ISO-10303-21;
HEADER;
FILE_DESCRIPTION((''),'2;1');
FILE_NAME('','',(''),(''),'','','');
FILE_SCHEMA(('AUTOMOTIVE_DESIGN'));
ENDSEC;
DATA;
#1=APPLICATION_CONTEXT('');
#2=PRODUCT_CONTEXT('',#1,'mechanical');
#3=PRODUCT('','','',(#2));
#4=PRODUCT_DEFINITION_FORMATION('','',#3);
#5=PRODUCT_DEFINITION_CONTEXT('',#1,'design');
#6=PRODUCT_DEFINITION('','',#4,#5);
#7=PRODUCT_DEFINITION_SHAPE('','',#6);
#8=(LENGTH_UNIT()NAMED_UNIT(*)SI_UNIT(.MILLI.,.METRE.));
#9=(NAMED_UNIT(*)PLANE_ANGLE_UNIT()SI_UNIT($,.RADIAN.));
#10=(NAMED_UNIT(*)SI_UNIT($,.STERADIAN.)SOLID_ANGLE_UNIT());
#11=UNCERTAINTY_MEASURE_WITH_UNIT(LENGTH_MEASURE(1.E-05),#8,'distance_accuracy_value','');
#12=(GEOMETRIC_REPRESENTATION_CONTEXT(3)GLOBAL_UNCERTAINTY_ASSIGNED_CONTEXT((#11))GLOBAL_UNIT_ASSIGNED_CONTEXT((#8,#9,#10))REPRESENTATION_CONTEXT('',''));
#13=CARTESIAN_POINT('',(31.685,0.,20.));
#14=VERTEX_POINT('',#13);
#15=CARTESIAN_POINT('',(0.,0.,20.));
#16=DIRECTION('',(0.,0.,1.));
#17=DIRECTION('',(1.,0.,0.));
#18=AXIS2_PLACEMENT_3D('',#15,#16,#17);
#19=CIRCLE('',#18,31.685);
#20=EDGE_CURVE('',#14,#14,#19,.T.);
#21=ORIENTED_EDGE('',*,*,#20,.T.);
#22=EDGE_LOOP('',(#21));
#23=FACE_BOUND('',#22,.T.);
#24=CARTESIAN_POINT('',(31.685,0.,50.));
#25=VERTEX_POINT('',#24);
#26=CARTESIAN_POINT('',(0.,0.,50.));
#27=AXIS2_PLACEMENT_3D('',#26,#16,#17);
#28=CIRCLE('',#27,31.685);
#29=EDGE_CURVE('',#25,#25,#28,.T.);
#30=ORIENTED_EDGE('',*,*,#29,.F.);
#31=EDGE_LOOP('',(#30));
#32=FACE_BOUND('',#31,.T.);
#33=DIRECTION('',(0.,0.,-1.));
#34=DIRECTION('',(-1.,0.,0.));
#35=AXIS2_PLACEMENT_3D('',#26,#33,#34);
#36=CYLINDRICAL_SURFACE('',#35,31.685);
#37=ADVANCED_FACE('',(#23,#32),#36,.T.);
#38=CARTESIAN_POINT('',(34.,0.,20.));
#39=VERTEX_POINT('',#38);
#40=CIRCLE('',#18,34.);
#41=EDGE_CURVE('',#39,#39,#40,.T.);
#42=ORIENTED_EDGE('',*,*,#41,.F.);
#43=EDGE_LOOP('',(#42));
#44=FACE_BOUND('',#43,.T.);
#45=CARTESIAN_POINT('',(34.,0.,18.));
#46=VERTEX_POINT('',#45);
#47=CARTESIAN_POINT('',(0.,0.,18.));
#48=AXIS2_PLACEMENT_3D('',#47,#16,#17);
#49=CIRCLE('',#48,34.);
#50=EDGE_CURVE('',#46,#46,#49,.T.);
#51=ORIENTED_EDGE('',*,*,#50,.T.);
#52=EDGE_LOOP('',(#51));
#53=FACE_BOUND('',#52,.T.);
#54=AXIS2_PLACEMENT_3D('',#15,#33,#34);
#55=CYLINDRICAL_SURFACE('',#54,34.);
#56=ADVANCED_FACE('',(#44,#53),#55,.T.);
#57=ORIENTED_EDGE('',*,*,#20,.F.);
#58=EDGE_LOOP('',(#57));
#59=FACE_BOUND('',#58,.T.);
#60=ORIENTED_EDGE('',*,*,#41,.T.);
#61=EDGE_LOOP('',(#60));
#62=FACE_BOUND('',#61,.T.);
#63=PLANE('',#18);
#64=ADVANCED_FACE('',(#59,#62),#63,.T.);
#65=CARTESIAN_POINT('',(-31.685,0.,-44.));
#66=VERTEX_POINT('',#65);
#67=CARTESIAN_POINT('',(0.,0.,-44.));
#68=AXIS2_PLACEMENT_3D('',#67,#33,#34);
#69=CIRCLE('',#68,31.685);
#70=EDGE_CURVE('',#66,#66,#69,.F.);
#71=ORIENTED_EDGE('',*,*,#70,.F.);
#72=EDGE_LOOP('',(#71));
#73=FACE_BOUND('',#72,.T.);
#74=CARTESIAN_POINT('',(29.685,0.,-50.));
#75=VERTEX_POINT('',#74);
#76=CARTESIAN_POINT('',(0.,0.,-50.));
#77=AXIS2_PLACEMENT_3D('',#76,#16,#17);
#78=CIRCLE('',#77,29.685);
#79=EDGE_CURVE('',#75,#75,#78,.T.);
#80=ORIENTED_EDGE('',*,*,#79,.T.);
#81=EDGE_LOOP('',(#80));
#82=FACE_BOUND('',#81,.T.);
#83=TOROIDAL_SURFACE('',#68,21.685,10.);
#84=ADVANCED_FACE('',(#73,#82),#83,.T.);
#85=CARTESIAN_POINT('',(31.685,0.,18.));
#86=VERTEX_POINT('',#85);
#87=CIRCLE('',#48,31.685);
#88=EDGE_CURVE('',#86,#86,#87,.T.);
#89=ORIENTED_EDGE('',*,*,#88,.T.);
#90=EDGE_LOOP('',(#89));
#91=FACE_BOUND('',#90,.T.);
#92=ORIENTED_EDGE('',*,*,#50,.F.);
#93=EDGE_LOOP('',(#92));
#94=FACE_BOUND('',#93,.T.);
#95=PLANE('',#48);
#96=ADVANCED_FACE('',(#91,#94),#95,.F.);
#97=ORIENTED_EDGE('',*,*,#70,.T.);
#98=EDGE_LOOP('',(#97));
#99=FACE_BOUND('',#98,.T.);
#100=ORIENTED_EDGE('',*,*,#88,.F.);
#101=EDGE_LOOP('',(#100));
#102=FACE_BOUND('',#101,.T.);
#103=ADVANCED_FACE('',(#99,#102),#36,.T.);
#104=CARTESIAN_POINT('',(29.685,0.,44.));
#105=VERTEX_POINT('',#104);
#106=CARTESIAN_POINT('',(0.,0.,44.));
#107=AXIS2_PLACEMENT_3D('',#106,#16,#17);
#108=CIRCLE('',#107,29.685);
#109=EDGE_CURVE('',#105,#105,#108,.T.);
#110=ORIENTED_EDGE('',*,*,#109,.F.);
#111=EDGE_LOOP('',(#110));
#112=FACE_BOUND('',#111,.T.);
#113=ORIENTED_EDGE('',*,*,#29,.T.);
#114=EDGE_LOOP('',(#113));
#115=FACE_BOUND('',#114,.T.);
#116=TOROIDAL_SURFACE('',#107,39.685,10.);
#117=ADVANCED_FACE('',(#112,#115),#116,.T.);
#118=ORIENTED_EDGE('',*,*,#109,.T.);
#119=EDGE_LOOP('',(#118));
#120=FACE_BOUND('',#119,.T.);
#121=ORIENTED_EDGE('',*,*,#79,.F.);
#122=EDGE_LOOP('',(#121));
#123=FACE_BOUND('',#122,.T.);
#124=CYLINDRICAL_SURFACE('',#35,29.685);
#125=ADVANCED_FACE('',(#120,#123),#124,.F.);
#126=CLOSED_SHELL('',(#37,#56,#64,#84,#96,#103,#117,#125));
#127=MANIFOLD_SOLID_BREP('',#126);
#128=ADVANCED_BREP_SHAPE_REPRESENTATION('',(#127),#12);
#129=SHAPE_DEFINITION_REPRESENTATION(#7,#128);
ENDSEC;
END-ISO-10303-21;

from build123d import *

# Parameters (mm, degrees)
SKETCH1_R           = 31.685
SKETCH1_R_2         = 29.685
BOSS_EXTRUDE1_DEPTH = 50
SKETCH2_R           = 34
SKETCH2_R_2         = 29.685
BOSS_EXTRUDE2_DEPTH = 1
FILLET1_R           = 10


with BuildPart() as part:
    # Sketch1 → Boss-Extrude1 (new, symmetric)
    with BuildSketch(Plane.XY):
        Circle(SKETCH1_R)
        Circle(SKETCH1_R_2, mode=Mode.SUBTRACT)
    extrude(amount=BOSS_EXTRUDE1_DEPTH, both=True)

    # Sketch2 → Boss-Extrude2 (add, symmetric)
    with BuildSketch(Plane.XY.offset(19)):
        Circle(SKETCH2_R)
        Circle(SKETCH2_R_2, mode=Mode.SUBTRACT)
    extrude(amount=BOSS_EXTRUDE2_DEPTH, both=True)

    # Fillet1
    # the kernel refuses this fillet: 10 mm, written as the material it takes off along each edge
    with BuildSketch(Plane(origin=(0, 0, -50), x_dir=(1, 0, 0), z_dir=(0, -1, 0))) as fillet1_piece_1:
        with BuildLine():
            CenterArc((21.685, 6), FILLET1_R, 323.130102354, 36.869897646)
            Line((29.685, 0), (29.845, -0.12))
            ThreePointArc((29.845, -0.12), (30.685, -0.2), (31.685, -0.2))
            Line((31.685, -0.2), (31.885, 0))
            Line((31.885, 0), (31.885, 6))
            Line((31.885, 6), (31.685, 6))
        make_face()
    revolve(axis=Axis((0, 0, -50), (0, 0, 1)), mode=Mode.SUBTRACT)
    with BuildSketch(Plane(origin=(0, 0, 50), x_dir=(1, 0, 0), z_dir=(0, -1, 0))) as fillet1_piece_2:
        with BuildLine():
            CenterArc((39.685, -6), FILLET1_R, 143.130102354, 36.869897646)
            Line((31.685, 0), (31.525, 0.12))
            ThreePointArc((31.525, 0.12), (30.685, 0.2), (29.685, 0.2))
            Line((29.685, 0.2), (29.485, 0))
            Line((29.485, 0), (29.485, -6))
            Line((29.485, -6), (29.685, -6))
        make_face()
    revolve(axis=Axis((0, 0, 50), (0, 0, 1)), mode=Mode.SUBTRACT)


solid = part.part
